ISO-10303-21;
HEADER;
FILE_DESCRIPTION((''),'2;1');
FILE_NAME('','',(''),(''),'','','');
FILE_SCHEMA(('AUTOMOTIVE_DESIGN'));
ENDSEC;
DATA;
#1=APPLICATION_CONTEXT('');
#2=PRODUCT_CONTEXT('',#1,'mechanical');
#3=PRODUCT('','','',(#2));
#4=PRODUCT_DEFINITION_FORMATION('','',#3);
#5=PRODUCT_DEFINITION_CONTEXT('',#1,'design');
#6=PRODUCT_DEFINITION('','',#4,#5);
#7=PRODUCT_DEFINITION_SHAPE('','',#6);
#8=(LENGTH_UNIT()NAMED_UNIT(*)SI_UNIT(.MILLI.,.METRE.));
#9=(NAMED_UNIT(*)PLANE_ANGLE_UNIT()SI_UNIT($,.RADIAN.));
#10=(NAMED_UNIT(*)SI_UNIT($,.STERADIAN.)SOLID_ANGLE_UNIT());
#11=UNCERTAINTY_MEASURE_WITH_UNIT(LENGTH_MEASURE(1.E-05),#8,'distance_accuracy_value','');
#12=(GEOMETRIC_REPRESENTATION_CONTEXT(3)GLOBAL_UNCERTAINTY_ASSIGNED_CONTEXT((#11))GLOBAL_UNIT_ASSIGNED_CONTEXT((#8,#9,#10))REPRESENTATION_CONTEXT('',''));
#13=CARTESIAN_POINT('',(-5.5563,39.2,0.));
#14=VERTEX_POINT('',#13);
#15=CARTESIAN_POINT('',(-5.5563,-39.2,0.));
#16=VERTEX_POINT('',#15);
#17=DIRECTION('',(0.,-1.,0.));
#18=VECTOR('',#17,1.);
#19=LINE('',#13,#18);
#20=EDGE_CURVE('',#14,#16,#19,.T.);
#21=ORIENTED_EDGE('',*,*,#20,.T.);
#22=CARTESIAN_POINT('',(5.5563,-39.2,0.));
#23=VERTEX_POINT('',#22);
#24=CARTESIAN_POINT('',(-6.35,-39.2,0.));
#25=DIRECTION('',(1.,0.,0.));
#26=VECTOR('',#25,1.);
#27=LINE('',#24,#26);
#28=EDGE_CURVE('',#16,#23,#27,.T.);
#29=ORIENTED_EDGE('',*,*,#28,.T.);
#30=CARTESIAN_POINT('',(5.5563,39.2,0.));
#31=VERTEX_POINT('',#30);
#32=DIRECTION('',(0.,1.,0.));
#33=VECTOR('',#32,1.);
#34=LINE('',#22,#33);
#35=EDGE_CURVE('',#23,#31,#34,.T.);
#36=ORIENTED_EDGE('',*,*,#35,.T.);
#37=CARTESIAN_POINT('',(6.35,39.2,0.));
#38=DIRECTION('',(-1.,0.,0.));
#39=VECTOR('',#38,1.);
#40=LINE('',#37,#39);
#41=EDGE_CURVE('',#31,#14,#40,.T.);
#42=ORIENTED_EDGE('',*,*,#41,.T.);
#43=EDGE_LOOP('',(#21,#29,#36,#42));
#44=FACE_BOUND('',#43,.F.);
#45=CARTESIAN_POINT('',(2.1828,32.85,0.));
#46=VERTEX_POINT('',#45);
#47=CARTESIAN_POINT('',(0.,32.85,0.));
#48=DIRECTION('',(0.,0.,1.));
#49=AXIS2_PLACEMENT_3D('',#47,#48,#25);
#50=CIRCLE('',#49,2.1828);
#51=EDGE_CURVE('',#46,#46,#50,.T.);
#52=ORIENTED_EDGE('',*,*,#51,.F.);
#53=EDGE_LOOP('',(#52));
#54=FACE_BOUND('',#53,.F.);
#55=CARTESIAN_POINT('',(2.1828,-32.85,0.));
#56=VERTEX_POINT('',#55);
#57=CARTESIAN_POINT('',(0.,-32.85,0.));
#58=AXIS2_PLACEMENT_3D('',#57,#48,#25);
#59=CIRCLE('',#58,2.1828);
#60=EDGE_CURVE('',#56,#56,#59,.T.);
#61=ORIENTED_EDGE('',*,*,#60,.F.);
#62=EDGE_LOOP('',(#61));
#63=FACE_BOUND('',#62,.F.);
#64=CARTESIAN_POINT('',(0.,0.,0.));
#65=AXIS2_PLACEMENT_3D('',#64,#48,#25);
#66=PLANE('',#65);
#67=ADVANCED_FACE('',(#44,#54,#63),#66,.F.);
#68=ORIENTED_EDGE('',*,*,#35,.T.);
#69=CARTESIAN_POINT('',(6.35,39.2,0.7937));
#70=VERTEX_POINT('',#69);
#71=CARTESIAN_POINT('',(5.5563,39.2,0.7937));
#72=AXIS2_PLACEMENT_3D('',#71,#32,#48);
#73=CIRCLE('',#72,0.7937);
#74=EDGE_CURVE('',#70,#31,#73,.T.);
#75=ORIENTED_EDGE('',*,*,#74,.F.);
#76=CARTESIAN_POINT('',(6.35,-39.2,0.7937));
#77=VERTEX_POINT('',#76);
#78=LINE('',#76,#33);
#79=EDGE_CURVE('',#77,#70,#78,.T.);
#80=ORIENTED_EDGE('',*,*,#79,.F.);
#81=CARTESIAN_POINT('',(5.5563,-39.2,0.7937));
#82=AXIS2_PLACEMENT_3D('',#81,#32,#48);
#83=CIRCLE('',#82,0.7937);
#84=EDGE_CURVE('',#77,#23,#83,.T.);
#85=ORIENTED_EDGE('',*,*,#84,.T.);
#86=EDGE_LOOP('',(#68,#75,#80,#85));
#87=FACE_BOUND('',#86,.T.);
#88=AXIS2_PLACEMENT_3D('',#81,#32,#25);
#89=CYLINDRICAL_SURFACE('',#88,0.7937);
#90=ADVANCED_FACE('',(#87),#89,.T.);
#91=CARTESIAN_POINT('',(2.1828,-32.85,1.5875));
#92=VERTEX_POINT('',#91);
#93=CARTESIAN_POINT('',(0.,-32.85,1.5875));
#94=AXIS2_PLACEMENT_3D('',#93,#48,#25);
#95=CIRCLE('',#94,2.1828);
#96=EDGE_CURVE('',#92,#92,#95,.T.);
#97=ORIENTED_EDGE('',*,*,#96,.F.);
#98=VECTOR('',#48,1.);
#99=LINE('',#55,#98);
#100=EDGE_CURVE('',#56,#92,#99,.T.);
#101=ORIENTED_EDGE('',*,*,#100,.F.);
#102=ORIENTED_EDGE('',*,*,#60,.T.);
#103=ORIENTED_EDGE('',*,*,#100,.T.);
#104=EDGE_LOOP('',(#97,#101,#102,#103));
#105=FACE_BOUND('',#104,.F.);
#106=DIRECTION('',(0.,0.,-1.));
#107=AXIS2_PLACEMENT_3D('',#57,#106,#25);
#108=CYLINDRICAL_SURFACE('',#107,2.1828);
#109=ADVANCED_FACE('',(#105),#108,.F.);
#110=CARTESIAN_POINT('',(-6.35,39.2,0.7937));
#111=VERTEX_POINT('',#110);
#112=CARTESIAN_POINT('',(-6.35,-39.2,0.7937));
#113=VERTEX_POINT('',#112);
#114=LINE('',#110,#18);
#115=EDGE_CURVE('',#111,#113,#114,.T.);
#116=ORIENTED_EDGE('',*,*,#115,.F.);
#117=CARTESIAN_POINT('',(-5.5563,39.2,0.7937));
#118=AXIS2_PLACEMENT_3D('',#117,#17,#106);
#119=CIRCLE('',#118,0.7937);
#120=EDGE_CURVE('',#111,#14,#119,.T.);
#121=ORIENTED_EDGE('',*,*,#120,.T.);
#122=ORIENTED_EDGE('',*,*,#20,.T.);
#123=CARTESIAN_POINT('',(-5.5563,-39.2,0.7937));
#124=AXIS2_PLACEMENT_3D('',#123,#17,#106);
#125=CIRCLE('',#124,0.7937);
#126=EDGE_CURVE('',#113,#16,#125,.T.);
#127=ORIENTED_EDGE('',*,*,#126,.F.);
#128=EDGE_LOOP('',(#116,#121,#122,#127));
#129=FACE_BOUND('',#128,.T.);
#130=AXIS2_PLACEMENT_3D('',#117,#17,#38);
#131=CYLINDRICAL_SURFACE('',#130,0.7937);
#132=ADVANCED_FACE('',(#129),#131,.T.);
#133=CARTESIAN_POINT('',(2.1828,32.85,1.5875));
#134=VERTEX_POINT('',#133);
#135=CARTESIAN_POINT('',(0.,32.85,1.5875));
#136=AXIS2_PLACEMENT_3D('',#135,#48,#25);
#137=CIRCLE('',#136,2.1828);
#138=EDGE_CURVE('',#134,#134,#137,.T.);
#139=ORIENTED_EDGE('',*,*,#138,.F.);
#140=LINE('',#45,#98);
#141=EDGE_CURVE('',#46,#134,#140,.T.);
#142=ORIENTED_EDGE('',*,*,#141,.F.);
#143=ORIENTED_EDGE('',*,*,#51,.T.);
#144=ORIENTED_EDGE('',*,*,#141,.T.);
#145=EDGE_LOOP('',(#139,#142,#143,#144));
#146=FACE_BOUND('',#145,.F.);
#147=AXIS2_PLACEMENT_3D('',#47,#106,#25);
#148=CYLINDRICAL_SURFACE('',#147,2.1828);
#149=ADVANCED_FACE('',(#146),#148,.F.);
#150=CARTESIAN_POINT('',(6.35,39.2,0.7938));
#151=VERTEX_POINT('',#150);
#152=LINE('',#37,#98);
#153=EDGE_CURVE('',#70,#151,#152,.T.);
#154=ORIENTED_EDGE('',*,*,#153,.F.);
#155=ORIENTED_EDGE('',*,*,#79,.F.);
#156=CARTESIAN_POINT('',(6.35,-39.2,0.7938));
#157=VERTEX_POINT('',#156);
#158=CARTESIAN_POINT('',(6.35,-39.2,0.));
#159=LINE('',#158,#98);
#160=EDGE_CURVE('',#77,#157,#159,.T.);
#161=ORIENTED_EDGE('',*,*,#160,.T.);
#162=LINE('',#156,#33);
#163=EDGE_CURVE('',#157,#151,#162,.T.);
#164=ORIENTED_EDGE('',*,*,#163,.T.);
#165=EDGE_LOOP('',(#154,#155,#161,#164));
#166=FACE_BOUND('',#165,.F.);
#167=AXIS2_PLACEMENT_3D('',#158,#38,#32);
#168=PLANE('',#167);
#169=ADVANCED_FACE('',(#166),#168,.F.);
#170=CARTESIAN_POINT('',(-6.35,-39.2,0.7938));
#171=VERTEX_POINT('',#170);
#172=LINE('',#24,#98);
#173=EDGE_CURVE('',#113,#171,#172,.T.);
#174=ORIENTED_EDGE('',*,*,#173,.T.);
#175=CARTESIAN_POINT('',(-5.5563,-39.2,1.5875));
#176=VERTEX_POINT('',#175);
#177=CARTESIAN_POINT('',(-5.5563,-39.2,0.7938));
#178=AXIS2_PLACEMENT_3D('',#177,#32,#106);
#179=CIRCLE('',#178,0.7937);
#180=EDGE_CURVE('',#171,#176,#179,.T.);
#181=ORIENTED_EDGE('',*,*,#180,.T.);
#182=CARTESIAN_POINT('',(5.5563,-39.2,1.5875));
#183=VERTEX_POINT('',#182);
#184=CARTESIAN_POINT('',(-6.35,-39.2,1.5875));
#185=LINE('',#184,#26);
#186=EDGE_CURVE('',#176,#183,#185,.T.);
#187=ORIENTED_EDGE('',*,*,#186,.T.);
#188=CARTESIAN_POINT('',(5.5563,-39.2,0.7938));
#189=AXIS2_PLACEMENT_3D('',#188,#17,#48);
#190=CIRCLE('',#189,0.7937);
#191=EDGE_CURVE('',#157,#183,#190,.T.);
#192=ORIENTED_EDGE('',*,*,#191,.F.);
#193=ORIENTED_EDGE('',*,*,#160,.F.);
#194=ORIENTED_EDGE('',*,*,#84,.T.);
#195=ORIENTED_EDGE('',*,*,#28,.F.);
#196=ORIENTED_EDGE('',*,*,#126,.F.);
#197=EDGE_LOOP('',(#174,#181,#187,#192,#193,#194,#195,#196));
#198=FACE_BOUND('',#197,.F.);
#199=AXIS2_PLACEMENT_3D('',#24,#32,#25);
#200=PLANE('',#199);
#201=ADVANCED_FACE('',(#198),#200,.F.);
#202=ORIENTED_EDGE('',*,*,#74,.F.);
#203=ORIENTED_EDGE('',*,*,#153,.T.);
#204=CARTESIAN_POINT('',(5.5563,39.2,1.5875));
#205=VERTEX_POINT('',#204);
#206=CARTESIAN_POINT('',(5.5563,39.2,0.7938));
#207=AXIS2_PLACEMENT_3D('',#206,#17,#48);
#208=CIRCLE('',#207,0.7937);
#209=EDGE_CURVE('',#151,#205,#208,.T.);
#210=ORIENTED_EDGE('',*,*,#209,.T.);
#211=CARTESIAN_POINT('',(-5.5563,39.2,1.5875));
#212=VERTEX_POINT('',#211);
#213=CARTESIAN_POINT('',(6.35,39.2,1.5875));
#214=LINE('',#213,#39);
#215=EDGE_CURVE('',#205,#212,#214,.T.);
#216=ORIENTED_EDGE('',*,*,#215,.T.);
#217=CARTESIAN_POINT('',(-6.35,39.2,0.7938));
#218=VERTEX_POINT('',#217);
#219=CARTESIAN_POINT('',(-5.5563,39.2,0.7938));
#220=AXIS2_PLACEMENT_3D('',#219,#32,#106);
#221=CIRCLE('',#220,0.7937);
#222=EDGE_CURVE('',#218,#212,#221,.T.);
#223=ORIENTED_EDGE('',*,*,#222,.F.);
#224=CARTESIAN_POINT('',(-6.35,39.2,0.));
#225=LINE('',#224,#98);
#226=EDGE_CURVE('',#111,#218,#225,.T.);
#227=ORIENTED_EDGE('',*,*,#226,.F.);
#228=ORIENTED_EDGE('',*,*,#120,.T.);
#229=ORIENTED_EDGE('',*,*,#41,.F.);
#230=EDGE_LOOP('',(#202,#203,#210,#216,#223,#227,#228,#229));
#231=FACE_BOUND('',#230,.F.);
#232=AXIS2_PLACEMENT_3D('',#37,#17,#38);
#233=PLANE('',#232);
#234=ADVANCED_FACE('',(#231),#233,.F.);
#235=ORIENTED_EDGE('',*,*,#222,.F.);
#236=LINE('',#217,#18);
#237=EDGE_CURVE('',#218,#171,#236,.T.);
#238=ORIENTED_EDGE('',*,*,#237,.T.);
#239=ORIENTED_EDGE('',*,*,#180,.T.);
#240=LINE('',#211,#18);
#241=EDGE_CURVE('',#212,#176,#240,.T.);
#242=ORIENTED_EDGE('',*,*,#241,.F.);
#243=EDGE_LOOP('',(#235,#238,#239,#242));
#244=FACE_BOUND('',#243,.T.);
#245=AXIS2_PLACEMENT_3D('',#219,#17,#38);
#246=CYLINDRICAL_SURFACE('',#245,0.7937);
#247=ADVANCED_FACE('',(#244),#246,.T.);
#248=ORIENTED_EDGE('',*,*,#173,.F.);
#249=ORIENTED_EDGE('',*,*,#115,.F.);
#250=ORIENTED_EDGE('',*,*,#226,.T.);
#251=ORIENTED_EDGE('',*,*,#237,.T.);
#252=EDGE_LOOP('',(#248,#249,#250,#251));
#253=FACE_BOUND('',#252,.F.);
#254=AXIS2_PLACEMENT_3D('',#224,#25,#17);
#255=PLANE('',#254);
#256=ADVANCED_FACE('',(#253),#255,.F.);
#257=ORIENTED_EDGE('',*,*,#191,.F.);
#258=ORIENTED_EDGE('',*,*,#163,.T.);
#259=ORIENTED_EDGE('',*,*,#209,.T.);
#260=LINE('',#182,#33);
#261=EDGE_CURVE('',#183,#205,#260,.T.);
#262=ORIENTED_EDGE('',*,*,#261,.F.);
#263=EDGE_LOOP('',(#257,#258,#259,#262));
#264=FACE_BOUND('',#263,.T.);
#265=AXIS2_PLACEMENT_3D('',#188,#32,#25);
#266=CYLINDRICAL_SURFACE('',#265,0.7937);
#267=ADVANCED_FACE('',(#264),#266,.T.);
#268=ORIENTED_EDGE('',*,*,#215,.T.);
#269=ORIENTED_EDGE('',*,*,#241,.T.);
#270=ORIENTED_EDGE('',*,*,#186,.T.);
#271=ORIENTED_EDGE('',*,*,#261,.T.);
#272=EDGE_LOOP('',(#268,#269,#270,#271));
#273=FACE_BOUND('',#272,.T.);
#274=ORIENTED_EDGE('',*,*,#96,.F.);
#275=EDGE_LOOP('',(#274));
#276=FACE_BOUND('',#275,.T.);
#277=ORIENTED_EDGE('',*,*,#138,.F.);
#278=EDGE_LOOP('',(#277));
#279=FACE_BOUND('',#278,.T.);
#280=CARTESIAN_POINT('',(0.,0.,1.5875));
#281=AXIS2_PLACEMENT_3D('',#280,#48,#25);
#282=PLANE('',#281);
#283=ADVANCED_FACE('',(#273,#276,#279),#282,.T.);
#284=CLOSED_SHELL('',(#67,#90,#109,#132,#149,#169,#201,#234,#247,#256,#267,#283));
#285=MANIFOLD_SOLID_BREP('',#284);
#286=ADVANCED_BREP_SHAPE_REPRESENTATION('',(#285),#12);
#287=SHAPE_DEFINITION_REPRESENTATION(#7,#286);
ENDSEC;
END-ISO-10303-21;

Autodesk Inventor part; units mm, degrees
ref_plane "YZ Plane" through (0, 0, 0) normal (1, 0, 0) x (0, 1, 0)
ref_plane "XZ Plane" through (0, 0, 0) normal (0, 1, 0) x (-1, 0, 0)
ref_plane "XY Plane" through (0, 0, 0) normal (0, 0, 1) x (1, 0, 0)
sketch "Sketch1" plane through (0, 0, 0) normal (0, 0, 1) x (1, 0, 0)
  circle A0 centre (0, 32.85) radius 2.1828
  circle A1 centre (0, -32.85) radius 2.1828
  line L0 (-6.35, -39.2) -> (6.35, -39.2)
  line L1 (6.35, -39.2) -> (6.35, 39.2)
  line L2 (6.35, 39.2) -> (-6.35, 39.2)
  line L3 (-6.35, 39.2) -> (-6.35, -39.2)
  line L4 (-6.35, -39.2) -> (6.35, 39.2) construction
  line L5 (6.35, -39.2) -> (-6.35, 39.2) construction
  point P0 (0, 0)
  dimension "d0" = 4.3656
  dimension "d1" = 4.3656
  dimension "d2" = 65.7
  dimension "d3" = 32.85
  dimension "d4" = 32.85
  dimension "d5" = 12.7
  dimension "d6" = 6.35
extrude "Extrusion1" add sketch "Sketch1" along normal blind 1.5875
fillet "Fillet1" radius 0.7937 4 edges at (-6.35, 0, 0) (-6.35, 0, 1.5875) (6.35, 0, 0) (6.35, 0, 1.5875)
properties part number "Part H"
